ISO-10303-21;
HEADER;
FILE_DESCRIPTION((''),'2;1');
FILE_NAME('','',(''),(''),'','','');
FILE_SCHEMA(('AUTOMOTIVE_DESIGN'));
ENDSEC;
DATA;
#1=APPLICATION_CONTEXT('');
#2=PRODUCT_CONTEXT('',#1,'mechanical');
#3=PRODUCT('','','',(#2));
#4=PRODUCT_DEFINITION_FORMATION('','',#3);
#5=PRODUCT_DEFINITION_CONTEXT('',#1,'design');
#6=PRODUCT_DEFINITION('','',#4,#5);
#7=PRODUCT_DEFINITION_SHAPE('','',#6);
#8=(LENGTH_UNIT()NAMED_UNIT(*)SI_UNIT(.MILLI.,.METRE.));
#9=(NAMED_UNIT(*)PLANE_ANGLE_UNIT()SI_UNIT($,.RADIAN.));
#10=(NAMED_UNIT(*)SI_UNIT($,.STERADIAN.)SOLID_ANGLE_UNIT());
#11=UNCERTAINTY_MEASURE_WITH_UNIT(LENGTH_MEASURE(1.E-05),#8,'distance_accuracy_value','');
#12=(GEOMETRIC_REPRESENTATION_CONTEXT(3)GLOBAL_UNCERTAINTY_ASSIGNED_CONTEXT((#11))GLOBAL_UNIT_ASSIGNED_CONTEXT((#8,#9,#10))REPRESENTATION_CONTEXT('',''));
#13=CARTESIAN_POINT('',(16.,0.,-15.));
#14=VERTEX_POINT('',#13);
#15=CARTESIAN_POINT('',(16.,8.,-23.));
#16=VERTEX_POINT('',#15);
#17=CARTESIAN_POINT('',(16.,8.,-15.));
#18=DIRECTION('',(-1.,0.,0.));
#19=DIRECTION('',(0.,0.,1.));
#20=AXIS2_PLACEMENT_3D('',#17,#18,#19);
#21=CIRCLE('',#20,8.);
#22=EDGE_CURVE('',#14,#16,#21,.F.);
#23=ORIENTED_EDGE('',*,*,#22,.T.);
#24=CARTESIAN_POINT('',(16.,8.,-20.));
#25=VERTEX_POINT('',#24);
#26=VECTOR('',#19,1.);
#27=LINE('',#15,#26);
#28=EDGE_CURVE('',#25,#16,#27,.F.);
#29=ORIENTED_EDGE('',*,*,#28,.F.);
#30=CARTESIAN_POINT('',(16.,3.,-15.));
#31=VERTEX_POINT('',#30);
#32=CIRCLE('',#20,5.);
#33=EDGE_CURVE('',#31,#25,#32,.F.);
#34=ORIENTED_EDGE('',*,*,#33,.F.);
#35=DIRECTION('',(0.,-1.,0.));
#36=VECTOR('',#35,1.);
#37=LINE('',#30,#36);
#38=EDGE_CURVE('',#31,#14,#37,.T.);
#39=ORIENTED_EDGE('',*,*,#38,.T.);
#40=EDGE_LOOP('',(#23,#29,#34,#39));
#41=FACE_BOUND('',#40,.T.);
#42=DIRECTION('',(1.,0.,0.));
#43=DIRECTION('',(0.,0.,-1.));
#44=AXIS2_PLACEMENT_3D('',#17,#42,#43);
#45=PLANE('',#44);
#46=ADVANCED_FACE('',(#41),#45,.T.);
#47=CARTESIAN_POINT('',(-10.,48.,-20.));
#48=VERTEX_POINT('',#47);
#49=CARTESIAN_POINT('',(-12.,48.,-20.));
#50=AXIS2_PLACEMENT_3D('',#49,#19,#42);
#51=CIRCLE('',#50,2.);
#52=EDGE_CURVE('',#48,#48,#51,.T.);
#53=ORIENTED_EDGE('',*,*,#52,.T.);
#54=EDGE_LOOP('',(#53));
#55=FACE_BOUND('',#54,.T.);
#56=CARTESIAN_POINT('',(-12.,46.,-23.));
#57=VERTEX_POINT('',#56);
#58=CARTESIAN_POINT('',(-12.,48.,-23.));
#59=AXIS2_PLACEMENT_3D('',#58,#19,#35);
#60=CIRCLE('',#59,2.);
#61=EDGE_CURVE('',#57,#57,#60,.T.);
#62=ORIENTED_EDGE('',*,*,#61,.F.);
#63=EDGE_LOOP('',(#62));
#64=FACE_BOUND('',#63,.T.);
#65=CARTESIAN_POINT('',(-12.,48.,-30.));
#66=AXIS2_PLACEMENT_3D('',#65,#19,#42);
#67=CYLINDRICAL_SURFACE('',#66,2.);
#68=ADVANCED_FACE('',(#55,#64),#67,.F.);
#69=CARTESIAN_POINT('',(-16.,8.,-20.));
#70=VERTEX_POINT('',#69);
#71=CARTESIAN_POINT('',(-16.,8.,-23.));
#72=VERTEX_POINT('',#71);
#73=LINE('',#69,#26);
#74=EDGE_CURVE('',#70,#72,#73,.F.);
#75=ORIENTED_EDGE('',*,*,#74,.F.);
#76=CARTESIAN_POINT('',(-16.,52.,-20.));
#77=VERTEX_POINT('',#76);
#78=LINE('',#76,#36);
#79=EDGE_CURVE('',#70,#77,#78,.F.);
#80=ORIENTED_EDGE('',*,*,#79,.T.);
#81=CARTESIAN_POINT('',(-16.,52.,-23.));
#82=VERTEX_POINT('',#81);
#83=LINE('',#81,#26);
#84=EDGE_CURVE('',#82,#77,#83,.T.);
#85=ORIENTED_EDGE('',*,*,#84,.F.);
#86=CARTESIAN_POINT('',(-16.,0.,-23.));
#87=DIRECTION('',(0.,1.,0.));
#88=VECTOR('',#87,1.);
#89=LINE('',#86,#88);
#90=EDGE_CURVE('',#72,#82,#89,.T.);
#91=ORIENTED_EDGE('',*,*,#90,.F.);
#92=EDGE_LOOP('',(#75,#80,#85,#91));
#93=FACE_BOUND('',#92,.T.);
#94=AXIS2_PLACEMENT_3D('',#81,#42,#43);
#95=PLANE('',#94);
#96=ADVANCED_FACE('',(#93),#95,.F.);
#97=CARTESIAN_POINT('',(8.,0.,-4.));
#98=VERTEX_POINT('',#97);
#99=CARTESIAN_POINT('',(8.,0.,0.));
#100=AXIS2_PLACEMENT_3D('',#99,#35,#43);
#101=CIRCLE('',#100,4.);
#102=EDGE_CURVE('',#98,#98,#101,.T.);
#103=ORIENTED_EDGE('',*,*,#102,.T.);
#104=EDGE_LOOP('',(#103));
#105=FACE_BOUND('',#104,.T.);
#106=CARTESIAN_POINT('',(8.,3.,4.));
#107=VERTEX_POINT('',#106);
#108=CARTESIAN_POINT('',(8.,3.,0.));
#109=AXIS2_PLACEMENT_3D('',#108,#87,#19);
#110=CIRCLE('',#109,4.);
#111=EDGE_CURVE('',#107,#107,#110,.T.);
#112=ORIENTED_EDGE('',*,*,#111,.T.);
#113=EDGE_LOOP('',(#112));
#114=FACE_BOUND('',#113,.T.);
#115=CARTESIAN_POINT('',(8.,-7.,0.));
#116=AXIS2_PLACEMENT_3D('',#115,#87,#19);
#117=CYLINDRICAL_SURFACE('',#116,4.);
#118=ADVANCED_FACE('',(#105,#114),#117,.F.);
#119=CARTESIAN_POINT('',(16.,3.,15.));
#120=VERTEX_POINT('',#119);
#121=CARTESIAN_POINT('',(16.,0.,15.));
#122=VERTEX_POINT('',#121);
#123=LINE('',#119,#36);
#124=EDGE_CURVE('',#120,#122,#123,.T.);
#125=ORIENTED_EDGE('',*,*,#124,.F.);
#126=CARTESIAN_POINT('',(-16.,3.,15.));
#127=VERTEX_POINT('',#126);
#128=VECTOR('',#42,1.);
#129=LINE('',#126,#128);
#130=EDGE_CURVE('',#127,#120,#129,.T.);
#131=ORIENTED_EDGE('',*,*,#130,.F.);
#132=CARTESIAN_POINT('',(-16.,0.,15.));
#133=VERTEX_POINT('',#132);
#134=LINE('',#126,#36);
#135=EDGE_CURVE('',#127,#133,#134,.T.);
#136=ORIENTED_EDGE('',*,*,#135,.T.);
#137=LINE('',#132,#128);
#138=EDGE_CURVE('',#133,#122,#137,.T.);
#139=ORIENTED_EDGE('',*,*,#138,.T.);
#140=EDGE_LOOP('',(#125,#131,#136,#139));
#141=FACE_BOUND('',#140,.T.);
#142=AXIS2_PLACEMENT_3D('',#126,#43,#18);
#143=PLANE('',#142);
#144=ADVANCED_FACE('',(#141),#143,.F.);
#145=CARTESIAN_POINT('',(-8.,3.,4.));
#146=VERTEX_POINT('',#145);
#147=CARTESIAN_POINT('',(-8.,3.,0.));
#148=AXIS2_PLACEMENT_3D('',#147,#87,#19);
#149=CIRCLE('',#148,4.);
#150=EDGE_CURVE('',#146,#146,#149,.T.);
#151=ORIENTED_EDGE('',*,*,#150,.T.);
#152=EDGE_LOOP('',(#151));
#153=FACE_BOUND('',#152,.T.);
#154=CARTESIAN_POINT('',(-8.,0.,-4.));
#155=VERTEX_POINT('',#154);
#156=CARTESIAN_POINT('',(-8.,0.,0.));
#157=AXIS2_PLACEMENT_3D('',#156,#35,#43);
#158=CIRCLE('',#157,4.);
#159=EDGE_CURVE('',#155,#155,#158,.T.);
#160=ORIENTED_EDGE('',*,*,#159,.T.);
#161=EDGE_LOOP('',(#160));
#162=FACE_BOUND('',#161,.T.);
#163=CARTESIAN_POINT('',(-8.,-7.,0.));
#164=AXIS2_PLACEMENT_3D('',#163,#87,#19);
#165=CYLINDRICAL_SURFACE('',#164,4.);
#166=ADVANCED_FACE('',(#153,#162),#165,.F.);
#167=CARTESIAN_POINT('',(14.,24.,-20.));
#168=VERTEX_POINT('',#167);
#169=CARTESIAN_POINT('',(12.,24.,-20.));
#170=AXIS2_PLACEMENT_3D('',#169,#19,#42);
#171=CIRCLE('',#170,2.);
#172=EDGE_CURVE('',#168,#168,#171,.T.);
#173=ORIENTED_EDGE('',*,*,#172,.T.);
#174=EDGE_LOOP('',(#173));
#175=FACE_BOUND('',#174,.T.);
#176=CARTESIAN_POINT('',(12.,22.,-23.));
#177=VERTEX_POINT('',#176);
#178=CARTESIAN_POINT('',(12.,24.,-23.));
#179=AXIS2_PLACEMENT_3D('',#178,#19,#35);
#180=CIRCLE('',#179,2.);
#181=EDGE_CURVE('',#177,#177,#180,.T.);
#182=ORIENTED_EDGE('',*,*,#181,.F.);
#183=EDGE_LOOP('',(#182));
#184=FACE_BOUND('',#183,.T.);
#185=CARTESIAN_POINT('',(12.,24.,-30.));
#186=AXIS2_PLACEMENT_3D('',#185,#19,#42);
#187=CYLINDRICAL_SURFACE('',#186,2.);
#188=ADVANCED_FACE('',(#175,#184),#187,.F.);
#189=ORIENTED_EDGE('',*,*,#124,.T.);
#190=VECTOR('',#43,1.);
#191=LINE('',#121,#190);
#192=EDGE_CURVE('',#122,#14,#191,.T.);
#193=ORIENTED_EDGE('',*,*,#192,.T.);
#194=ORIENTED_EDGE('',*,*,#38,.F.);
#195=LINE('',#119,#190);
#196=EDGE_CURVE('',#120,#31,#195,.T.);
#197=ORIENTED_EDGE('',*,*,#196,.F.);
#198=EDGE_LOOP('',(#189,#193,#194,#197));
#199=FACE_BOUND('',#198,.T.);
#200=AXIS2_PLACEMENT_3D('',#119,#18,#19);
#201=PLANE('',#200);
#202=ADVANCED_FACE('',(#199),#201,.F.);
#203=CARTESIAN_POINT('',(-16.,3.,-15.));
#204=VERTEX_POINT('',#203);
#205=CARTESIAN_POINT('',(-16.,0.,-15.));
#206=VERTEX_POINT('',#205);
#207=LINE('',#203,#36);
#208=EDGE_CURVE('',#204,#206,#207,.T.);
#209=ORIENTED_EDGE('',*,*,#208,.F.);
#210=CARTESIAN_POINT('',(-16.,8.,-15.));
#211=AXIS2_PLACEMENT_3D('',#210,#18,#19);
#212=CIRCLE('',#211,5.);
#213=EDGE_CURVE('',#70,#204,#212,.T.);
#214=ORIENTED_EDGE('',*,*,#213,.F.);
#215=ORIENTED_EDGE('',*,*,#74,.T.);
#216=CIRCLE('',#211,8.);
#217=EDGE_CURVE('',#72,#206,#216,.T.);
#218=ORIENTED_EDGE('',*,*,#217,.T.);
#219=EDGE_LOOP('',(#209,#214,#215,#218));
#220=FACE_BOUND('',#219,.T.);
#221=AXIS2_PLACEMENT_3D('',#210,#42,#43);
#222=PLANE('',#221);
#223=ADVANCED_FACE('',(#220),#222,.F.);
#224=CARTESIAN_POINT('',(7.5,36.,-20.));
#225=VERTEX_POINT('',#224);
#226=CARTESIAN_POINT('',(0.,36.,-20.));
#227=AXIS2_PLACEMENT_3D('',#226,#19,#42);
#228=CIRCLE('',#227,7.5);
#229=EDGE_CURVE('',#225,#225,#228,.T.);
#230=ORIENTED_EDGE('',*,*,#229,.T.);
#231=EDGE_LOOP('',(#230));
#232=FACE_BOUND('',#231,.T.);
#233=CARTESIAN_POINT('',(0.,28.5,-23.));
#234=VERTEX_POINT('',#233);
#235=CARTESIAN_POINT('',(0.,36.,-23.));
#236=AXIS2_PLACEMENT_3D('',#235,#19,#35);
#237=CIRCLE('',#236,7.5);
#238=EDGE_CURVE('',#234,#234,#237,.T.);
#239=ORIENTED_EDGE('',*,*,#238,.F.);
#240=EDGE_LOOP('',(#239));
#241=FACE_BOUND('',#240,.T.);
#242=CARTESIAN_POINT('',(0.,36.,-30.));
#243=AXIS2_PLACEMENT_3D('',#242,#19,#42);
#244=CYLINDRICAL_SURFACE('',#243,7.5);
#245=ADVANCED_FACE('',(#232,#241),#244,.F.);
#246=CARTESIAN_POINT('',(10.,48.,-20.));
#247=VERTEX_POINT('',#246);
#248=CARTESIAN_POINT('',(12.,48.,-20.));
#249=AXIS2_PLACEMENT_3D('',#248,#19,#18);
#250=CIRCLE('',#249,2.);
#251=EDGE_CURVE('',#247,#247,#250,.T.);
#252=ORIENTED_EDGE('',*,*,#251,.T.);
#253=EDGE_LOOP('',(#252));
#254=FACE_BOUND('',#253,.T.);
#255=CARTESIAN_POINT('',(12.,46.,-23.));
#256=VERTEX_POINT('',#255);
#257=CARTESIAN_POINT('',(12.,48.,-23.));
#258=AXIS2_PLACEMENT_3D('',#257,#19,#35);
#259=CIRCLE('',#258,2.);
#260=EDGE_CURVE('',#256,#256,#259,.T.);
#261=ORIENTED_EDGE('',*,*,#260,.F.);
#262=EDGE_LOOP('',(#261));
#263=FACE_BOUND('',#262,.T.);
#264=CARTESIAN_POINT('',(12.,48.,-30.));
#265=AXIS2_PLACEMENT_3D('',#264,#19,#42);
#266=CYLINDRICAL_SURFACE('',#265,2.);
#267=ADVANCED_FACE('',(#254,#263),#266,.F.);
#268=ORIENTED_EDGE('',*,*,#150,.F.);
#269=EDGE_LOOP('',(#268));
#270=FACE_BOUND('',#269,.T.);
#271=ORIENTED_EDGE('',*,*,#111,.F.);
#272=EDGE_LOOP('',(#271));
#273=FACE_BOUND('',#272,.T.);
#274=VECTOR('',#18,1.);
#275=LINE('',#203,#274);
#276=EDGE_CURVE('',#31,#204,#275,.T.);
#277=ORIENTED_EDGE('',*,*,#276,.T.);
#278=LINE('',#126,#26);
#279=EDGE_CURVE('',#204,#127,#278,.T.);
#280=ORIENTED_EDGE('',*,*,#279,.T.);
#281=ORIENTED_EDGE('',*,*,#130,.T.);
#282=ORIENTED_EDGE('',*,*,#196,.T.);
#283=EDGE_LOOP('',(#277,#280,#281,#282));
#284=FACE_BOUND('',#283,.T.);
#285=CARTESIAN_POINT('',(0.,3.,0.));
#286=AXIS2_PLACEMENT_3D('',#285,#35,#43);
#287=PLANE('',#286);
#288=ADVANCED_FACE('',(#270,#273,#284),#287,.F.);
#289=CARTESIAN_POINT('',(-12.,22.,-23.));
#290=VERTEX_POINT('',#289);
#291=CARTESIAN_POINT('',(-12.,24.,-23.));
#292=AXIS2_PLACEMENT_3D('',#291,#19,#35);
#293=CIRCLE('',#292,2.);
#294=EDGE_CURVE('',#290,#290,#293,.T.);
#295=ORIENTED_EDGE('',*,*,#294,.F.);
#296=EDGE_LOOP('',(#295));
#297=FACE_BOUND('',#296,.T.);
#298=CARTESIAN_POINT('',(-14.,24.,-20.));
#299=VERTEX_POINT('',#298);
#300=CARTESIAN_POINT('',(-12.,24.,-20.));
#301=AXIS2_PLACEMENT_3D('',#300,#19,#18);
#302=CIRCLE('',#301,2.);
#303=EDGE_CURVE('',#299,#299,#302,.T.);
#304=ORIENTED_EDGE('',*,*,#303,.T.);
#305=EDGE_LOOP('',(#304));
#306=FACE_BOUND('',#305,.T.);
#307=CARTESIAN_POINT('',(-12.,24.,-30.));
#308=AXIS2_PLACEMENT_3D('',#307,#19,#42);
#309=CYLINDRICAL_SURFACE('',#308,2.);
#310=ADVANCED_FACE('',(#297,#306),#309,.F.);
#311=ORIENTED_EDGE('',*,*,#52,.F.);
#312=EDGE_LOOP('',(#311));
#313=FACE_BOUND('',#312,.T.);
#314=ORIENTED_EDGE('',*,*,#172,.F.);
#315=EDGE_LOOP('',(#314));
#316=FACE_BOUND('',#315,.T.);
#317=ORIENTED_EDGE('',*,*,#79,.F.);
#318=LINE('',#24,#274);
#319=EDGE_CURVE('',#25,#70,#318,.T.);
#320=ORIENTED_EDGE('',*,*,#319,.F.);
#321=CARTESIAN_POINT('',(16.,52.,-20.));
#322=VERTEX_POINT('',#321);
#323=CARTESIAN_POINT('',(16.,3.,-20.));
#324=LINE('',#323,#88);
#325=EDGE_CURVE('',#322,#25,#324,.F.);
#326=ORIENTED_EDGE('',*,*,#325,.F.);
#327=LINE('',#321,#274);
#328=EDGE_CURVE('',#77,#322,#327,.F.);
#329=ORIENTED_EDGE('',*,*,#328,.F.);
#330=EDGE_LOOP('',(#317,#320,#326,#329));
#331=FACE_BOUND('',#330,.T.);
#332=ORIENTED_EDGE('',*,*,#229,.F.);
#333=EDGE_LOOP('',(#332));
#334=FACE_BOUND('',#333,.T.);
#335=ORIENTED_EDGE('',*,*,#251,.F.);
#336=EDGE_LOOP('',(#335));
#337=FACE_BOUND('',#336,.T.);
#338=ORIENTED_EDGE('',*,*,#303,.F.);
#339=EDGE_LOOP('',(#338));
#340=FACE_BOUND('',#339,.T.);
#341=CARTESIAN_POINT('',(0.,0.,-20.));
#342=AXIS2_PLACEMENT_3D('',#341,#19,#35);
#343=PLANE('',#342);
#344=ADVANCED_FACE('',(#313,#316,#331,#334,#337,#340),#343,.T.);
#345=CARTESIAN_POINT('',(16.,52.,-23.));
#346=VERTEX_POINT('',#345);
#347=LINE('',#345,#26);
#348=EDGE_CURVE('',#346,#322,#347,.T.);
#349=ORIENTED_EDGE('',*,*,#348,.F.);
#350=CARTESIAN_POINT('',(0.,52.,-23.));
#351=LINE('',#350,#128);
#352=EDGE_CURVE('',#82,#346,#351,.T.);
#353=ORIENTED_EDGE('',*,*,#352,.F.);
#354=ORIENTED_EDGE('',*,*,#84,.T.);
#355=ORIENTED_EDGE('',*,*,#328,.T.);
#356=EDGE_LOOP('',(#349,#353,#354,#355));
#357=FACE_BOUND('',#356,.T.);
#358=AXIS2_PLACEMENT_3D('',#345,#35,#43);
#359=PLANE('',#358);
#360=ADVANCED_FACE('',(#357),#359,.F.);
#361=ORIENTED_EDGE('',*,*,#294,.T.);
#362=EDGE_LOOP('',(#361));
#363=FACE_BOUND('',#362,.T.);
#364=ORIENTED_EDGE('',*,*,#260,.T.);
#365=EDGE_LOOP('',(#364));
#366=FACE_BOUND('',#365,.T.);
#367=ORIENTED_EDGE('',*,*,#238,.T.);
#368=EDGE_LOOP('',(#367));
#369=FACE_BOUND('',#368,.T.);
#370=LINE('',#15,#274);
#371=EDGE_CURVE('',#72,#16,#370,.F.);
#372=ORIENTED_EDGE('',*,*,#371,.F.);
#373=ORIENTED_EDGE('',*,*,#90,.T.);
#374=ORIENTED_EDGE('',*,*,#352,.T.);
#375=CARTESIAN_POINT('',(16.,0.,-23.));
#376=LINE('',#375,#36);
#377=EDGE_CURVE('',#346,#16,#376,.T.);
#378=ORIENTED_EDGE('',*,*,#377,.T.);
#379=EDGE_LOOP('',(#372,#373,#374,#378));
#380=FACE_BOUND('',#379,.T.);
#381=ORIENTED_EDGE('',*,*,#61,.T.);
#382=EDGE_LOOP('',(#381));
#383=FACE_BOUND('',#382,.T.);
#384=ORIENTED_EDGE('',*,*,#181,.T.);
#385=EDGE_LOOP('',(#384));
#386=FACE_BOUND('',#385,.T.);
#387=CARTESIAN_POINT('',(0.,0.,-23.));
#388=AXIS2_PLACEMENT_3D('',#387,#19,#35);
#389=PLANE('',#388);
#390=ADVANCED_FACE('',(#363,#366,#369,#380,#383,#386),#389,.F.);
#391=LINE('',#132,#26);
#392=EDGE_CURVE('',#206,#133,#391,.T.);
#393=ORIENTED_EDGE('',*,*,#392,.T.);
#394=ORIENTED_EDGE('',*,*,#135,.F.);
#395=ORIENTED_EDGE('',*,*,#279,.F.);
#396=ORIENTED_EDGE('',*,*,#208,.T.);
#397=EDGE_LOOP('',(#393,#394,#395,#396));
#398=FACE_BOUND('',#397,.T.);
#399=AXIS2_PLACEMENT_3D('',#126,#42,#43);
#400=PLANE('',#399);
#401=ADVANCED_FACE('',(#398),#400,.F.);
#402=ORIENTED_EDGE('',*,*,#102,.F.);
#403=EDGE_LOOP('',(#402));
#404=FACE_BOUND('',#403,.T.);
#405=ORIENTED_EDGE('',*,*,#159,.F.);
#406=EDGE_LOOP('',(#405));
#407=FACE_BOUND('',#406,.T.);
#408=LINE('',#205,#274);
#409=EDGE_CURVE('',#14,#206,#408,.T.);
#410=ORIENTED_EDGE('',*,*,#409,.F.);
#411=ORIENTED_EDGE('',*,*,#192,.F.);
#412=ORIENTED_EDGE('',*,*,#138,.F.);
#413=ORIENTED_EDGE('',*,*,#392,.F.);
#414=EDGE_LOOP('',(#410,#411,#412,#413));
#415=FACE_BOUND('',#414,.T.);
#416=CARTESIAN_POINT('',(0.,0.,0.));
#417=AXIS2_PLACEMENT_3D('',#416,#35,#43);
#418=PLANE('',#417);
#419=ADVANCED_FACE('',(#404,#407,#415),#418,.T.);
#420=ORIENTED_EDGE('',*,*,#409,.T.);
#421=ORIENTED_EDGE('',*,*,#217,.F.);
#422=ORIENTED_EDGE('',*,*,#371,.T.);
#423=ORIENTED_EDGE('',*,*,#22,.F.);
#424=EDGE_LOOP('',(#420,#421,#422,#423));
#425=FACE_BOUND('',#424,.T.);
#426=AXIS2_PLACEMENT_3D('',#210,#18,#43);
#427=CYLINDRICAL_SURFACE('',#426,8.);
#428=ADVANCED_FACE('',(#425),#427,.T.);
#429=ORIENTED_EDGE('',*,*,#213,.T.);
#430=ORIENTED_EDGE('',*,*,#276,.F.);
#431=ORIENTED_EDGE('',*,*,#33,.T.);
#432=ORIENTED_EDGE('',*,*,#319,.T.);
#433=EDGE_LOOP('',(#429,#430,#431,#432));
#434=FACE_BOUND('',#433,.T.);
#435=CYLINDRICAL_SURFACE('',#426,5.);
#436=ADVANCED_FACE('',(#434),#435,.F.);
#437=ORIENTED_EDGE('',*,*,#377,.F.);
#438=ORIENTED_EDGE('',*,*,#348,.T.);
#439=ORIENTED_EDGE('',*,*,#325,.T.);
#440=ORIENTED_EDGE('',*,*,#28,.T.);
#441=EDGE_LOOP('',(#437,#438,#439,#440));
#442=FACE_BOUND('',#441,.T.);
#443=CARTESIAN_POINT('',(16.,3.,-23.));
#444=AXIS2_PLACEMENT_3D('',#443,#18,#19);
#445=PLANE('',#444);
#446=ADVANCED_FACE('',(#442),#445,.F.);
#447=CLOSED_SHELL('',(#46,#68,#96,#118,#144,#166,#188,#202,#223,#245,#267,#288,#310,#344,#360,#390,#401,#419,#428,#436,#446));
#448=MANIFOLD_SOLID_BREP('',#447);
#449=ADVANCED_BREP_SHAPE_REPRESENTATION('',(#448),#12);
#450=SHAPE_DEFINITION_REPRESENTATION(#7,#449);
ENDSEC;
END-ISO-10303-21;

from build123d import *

# Parameters (mm, degrees)
SKETCH5_W          = 32
SKETCH5_H          = 30
BASE_FLANGE1_DEPTH = 3
EDGE_FLANGE1_DEPTH = 32
SKETCH13_R         = 4
CUT_EXTRUDE1_DEPTH = 10
SKETCH14_R         = 7.5
SKETCH14_R_2       = 2
CUT_EXTRUDE2_DEPTH = 10


# Sheet-metal steps are written as plain solids
with BuildPart() as part:
    # Sketch5 → Base-Flange1 (new body)
    with BuildSketch(Plane(origin=(0, 0, 0), x_dir=(1, 0, 0), z_dir=(0, 1, 0))):
        Rectangle(SKETCH5_W, SKETCH5_H)
    extrude(amount=BASE_FLANGE1_DEPTH)

    # Edge-Flange1 section (across the edge) → Edge-Flange1 (add)
    with BuildSketch(Plane(origin=(16, 3, -20), x_dir=(0, 0, 1), z_dir=(-1, 0, 0))):
        with BuildLine():
            Line((-3, 5), (-3, 49))
            Line((-3, 49), (0, 49))
            Line((0, 49), (0, 5))
            ThreePointArc((0, 5), (1.464466094, 1.464466094), (5, 0))
            Line((5, 0), (5, -3))
            ThreePointArc((5, -3), (-0.656854249, -0.656854249), (-3, 5))
        make_face()
    extrude(amount=EDGE_FLANGE1_DEPTH)

    # Sketch13 → Cut-Extrude1 (cut)
    with BuildSketch(Plane(origin=(0, 3, 0), x_dir=(1, 0, 0), z_dir=(0, 1, 0))):
        with Locations(Location((-8, 0, 0), (0, 0, 270))):
            Circle(SKETCH13_R)
        with Locations(Location((8, 0, 0), (0, 0, 270))):
            Circle(SKETCH13_R)
    extrude(amount=-CUT_EXTRUDE1_DEPTH, mode=Mode.SUBTRACT)

    # Sketch14 → Cut-Extrude2 (cut)
    with BuildSketch(Plane.XY.offset(-20)):
        with Locations((0, 36)):
            Circle(SKETCH14_R)
        with Locations((-12, 48)):
            Circle(SKETCH14_R_2)
        with Locations(Location((12, 48, 0), (0, 0, 270))):
            Circle(SKETCH14_R_2)
        with Locations((12, 24)):
            Circle(SKETCH14_R_2)
        with Locations(Location((-12, 24, 0), (0, 0, 270))):
            Circle(SKETCH14_R_2)
    extrude(amount=-CUT_EXTRUDE2_DEPTH, mode=Mode.SUBTRACT)


solid = part.part
